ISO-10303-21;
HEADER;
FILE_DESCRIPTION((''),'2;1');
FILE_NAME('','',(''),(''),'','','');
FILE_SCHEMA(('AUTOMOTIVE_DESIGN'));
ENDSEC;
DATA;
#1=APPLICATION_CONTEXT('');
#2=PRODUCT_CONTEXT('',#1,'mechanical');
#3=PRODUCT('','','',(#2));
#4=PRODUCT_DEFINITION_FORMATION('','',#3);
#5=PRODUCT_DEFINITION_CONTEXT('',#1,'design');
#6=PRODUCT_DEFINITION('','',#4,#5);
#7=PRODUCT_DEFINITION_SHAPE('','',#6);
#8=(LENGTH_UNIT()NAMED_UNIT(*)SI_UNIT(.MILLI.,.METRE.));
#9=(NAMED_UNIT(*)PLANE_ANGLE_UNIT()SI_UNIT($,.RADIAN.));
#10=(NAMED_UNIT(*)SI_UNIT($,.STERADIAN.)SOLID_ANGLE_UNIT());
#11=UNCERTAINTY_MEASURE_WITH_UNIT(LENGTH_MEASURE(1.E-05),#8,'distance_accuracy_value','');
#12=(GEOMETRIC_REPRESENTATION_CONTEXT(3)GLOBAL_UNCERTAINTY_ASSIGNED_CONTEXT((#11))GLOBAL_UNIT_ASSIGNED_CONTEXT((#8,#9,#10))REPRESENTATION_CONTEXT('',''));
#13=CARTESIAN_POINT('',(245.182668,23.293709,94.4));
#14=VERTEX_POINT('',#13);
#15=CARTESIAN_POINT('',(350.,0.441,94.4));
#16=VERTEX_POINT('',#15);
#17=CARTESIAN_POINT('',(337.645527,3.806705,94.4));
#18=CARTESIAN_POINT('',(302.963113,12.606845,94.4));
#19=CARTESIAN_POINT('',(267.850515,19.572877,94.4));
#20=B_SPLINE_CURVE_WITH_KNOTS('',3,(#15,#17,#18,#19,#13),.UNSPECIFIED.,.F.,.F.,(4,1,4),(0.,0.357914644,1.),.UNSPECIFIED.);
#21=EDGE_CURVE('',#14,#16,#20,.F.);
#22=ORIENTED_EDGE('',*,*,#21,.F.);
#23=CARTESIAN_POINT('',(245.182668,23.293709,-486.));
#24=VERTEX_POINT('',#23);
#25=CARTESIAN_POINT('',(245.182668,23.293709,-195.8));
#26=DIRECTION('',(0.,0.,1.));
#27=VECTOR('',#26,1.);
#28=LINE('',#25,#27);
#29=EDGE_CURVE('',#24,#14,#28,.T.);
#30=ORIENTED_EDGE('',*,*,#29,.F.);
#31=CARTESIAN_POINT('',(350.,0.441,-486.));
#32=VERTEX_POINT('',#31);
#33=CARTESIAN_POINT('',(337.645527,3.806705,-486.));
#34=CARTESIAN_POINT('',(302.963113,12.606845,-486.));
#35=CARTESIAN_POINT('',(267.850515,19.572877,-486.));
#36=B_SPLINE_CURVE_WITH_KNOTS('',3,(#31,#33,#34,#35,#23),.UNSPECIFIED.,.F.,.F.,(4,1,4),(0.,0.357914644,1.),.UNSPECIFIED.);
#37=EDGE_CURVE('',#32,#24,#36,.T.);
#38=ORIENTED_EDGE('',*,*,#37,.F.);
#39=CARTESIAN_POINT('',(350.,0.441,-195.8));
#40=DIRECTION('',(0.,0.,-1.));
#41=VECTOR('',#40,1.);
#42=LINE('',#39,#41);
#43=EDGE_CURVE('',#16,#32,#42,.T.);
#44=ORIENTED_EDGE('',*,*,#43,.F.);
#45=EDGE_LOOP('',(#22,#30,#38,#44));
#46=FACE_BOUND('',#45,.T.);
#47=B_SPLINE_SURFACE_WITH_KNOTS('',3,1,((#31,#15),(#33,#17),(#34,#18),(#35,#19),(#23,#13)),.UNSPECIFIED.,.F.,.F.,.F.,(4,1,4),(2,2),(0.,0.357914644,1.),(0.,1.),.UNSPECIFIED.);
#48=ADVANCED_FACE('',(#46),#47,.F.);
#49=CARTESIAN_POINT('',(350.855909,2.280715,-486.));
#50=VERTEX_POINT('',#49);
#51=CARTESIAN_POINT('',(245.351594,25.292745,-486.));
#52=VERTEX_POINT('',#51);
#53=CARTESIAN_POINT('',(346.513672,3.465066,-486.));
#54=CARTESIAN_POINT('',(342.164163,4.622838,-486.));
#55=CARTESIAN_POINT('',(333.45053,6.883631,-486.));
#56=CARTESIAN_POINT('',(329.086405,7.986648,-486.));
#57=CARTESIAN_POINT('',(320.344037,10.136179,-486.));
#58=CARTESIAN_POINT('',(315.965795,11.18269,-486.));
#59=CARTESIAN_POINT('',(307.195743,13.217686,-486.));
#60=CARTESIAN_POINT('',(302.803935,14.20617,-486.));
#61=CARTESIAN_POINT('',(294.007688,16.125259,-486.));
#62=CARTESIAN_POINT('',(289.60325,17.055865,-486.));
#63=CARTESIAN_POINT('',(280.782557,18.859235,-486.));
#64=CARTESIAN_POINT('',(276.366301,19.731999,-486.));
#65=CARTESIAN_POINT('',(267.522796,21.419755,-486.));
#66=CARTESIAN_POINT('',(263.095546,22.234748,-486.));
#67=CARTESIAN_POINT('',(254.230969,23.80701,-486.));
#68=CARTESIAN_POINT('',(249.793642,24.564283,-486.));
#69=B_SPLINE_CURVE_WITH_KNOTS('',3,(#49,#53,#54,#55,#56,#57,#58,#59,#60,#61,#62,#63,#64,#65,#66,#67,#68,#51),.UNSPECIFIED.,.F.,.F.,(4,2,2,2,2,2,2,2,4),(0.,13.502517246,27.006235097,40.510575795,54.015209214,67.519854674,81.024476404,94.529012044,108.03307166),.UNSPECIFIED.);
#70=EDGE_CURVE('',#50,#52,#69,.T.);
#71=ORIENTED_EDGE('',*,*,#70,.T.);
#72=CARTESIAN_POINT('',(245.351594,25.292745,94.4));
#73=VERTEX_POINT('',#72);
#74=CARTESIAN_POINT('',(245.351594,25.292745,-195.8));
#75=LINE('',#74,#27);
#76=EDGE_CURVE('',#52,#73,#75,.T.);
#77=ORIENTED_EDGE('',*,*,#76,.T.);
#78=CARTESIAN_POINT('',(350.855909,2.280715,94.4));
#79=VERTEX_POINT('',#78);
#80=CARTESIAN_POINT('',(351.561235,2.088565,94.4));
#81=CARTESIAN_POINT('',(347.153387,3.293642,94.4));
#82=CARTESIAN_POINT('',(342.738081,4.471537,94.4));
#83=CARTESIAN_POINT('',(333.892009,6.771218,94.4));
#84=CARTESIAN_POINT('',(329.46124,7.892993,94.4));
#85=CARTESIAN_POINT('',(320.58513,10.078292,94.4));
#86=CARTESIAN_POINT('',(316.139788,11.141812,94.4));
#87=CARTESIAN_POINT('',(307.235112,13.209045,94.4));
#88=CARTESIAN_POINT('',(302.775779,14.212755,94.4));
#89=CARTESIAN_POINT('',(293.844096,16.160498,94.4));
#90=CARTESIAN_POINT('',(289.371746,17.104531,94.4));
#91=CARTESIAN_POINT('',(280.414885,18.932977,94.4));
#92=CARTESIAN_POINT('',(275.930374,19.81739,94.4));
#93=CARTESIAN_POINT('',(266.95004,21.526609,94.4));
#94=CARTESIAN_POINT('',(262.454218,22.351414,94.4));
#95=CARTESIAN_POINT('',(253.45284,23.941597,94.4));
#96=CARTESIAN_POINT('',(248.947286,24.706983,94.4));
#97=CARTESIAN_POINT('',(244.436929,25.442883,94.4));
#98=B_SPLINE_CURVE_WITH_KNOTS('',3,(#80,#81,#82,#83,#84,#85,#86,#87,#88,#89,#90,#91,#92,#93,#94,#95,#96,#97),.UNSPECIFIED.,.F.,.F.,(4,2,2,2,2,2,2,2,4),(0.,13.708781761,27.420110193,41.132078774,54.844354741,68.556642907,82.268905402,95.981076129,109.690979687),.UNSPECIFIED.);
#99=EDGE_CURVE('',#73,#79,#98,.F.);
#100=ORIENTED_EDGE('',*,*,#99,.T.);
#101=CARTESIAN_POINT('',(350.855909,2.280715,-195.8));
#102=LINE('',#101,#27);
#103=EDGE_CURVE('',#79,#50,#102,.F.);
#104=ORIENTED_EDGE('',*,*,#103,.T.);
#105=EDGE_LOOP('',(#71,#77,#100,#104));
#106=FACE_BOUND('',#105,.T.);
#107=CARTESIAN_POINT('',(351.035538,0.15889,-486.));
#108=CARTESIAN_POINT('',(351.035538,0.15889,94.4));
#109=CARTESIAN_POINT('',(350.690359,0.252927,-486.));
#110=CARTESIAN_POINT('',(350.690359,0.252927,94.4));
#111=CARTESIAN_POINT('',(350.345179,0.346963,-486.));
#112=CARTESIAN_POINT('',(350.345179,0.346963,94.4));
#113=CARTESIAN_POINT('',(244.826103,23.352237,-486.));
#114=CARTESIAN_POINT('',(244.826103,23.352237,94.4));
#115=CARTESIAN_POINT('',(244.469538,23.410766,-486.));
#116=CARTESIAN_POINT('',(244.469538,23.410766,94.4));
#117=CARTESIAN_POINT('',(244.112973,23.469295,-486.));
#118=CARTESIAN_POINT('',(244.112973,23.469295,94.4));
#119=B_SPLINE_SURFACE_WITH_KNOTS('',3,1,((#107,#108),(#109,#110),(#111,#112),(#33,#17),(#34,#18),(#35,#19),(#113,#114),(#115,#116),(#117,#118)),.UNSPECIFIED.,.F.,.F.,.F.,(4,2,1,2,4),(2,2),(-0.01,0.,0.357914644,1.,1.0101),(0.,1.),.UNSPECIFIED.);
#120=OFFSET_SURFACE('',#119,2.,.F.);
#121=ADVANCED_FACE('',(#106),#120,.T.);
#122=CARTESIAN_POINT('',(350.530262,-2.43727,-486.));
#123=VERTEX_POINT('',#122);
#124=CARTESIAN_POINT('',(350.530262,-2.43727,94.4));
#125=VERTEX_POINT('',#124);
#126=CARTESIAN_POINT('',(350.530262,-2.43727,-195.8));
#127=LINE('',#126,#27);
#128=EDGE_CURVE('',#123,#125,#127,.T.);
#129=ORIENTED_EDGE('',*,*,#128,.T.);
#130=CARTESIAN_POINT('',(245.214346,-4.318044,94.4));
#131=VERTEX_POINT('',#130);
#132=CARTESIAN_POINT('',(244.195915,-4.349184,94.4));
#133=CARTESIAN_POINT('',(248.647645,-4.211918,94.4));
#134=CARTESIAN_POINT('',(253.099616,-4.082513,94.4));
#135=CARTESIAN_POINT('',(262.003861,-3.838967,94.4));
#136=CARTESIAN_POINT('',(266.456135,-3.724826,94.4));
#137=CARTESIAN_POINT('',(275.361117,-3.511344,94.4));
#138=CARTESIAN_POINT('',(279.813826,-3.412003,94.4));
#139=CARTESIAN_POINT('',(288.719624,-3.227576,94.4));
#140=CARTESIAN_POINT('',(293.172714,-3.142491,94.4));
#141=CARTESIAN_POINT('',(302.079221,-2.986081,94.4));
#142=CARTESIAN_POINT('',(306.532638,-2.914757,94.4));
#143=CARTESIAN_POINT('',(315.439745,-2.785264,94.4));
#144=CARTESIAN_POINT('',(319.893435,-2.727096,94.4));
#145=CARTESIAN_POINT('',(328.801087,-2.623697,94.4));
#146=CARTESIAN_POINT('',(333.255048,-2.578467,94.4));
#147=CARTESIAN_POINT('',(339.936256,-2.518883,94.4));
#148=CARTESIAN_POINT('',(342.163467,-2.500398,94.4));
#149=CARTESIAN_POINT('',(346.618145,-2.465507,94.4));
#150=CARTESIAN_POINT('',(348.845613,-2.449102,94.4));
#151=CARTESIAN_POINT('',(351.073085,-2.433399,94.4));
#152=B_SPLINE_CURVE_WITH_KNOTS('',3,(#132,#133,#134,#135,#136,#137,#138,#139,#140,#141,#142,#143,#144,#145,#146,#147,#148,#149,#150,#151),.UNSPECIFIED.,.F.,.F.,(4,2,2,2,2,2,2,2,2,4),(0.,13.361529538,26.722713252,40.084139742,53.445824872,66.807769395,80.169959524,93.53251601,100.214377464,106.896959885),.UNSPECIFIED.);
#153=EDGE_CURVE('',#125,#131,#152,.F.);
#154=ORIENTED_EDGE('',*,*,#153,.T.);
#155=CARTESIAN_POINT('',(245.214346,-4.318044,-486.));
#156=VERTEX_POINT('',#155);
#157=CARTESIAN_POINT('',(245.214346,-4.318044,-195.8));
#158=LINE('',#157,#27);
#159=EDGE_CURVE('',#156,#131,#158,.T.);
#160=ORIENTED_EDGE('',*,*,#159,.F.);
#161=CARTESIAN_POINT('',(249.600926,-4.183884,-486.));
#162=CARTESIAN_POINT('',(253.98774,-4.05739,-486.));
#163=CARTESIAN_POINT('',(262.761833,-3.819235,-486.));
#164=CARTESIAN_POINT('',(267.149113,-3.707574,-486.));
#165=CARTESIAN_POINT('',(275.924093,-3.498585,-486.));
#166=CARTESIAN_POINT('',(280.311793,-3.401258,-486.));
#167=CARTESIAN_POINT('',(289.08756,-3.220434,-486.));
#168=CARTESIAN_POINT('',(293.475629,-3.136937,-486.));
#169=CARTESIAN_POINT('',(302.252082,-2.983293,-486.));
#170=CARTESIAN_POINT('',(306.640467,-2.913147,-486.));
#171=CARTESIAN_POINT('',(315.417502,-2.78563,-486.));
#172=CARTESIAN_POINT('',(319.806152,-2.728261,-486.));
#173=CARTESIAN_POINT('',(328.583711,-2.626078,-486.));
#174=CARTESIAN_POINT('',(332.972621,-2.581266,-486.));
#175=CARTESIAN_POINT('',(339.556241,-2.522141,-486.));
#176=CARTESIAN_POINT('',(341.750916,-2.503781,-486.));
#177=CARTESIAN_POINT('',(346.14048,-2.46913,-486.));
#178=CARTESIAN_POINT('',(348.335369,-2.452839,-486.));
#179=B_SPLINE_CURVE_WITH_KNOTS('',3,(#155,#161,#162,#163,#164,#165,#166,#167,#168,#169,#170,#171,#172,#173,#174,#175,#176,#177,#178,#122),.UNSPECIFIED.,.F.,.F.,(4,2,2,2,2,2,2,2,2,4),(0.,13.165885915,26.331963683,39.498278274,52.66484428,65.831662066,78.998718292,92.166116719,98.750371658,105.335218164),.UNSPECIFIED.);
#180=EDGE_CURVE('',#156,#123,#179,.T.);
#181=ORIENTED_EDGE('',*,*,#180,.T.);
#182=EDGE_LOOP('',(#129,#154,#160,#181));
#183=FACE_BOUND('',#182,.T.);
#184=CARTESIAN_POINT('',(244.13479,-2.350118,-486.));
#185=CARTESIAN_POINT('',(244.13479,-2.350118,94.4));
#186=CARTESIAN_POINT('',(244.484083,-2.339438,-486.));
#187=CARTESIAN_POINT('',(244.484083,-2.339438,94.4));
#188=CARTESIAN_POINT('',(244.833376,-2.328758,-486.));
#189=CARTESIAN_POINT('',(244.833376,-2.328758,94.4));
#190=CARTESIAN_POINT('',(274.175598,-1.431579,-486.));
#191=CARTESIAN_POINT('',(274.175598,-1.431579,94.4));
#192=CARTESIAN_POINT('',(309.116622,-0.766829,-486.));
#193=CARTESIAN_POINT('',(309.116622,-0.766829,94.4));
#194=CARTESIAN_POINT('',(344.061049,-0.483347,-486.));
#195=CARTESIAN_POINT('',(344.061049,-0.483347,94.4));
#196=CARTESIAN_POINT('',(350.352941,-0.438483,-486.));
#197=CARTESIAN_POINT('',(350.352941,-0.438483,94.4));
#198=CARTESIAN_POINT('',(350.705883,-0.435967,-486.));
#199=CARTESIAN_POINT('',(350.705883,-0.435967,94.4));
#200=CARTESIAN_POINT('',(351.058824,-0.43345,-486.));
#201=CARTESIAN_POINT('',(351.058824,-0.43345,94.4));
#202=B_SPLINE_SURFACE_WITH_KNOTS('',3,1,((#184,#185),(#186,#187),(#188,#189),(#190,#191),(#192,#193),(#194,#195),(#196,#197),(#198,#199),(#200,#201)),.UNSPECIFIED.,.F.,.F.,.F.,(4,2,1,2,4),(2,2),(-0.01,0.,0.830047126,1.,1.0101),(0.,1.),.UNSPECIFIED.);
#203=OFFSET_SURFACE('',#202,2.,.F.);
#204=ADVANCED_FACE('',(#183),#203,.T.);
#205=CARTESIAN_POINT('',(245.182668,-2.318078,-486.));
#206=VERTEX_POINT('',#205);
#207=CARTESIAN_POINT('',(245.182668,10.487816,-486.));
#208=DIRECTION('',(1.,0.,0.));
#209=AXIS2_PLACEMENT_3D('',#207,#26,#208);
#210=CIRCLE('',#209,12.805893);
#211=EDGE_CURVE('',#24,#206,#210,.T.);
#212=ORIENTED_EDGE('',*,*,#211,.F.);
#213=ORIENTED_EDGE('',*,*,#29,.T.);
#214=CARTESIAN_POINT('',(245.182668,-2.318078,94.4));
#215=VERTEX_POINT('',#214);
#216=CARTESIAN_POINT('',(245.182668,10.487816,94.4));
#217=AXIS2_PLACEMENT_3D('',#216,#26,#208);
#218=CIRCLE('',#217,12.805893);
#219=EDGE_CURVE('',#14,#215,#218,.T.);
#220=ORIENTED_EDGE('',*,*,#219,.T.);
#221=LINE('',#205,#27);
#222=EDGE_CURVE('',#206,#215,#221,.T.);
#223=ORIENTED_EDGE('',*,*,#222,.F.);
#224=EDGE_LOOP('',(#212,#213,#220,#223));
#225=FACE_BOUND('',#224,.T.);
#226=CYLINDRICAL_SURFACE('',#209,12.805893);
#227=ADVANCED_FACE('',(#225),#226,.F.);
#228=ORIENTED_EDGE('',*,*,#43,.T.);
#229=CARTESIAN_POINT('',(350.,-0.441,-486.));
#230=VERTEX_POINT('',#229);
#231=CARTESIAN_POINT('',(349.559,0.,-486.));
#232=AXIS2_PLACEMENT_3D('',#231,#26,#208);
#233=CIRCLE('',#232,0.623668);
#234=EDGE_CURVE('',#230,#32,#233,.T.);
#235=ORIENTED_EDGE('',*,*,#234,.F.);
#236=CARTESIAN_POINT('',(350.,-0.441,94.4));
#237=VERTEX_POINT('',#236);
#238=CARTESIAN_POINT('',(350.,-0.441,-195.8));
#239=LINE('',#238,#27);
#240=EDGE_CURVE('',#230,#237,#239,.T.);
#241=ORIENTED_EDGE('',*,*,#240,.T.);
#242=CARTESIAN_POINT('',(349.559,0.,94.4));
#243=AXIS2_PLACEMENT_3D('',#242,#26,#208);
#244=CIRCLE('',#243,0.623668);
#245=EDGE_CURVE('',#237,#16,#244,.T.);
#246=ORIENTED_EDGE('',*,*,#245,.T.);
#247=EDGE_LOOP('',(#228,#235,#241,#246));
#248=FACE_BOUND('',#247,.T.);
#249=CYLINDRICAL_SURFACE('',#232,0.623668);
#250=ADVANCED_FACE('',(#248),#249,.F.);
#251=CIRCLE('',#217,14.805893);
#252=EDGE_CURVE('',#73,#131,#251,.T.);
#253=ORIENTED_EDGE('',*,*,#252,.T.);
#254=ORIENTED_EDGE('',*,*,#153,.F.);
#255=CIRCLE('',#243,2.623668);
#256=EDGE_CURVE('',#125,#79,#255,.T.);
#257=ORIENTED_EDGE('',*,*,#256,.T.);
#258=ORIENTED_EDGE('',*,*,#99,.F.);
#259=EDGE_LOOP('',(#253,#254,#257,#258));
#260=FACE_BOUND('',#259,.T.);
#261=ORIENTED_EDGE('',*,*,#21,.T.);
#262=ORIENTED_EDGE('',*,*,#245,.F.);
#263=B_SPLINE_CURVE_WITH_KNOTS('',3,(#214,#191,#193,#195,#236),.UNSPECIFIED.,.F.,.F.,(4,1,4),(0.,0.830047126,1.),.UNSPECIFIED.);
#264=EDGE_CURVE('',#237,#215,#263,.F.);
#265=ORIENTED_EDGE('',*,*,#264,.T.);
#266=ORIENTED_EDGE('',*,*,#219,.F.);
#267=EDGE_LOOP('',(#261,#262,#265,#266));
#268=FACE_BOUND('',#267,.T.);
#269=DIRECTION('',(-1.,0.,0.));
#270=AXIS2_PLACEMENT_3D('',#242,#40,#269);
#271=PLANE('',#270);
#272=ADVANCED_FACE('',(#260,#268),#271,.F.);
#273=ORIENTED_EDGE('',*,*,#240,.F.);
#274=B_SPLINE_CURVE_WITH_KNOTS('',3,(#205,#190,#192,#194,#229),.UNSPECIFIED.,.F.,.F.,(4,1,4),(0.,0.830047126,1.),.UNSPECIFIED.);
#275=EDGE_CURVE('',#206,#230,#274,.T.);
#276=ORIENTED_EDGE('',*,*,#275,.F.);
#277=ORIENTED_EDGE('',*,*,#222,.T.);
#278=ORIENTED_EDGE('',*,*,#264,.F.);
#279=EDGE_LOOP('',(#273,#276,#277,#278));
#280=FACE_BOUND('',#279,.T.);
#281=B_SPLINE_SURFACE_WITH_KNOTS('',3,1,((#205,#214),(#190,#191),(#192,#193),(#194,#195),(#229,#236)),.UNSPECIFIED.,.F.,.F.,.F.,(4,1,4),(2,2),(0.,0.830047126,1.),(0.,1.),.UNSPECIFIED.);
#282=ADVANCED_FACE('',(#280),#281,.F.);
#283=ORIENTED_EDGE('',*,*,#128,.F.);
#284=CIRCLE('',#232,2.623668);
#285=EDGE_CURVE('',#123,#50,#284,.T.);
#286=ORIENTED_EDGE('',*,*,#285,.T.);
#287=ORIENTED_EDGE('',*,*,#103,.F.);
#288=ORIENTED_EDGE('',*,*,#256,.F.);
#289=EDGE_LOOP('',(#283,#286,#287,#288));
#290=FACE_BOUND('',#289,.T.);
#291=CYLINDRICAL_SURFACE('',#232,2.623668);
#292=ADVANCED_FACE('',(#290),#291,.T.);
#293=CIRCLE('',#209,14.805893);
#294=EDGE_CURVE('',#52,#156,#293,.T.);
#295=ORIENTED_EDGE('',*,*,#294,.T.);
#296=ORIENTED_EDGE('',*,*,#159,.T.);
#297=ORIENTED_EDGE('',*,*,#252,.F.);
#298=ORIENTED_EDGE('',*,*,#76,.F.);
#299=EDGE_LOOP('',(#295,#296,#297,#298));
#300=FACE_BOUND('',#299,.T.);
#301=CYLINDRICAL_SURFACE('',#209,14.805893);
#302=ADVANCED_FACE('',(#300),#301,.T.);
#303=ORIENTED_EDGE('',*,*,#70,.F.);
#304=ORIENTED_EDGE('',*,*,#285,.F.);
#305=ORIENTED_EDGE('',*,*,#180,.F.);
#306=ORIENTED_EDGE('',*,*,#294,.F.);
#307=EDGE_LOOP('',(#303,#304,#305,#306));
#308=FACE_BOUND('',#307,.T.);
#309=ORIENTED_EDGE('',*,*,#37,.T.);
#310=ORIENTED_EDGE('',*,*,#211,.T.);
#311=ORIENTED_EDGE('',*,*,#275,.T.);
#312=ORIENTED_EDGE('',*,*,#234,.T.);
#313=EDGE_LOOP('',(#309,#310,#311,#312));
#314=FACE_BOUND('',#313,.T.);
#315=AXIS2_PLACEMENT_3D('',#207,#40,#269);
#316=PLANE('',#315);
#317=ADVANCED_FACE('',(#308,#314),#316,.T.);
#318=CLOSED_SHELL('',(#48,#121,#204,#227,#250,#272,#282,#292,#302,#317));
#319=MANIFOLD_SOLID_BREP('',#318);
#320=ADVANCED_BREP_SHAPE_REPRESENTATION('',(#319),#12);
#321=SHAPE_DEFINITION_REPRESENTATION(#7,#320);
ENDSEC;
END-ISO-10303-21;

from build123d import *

# Parameters (mm, degrees)
THICKEN_START   = -486
THICKEN_1_DEPTH = 580.4


# Read off the part's stored shape, not the designer's step: Придать толщину1
with BuildPart() as part:
    # Придать толщину1 outline → Придать толщину1 (new body)
    with BuildSketch(Plane.XY.offset(THICKEN_START)):
        with BuildLine():
            ThreePointArc((350.530262234, -2.437269866), (352.176440725, -0.180662049), (350.855908905, 2.280715243))
            add(Edge.make_bspline(
                [(350.855908905, 2.280715243), (350.847341227, 2.283049319), (350.838773452, 2.285383421), (350.830205678, 2.287717523), (350.821637903, 2.290051626), (350.813070129, 2.292385728), (350.804502354, 2.294719831), (350.79593458, 2.297053933), (350.787366805, 2.299388035), (350.778799031, 2.301722138), (350.770231256, 2.30405624), (350.761663481, 2.306390342), (350.753095707, 2.308724445), (350.744527932, 2.311058547), (350.721223101, 2.317407438), (350.706486045, 2.321422226), (350.691748985, 2.325437014), (350.677011935, 2.329451802), (350.662274867, 2.33346659), (350.647537825, 2.337481378), (350.632800752, 2.341496166), (350.61806371, 2.345510955), (350.603326642, 2.349525743), (350.588589592, 2.353540531), (350.573852532, 2.357555319), (350.559115477, 2.361570107), (350.544378419, 2.365584895), (350.522272834, 2.371607077), (350.514923563, 2.373609253), (350.507299128, 2.375686214), (350.500660824, 2.377494496), (350.491767576, 2.379917309), (350.486631802, 2.381315638), (350.476720209, 2.384016224), (350.471520136, 2.385431796), (350.462702931, 2.387833891), (350.456026243, 2.389652051), (350.448396167, 2.391730226), (350.441070823, 2.39372521), (350.433682178, 2.395737404), (350.418917908, 2.399758121), (350.411535758, 2.401768425), (350.404153591, 2.403778673), (350.396771415, 2.405788865), (350.389389211, 2.407799003), (350.382007011, 2.409809085), (350.374624771, 2.411819112), (350.367242542, 2.413829084), (350.359860275, 2.415839001), (350.352478009, 2.417848863), (350.345095717, 2.419858669), (350.337713416, 2.42186842), (350.330331097, 2.423878115), (350.29341943, 2.433926318), (350.26388985, 2.441963997), (350.234360031, 2.450000791), (350.204829954, 2.458036702), (350.175299658, 2.466071729), (350.145769079, 2.474105871), (350.116238304, 2.48213913), (350.086707235, 2.490171505), (350.057175964, 2.498202995), (350.027644418, 2.506233601), (349.998112646, 2.514263323), (349.968580621, 2.52229216), (349.939048354, 2.530320112), (349.791385798, 2.570455453), (349.673251845, 2.602549572), (349.555113982, 2.634629532), (349.436972217, 2.666695331), (349.318826538, 2.698746961), (349.200676964, 2.73078442), (349.082523474, 2.762807702), (348.964366093, 2.794816803), (348.846204799, 2.826811719), (348.728039611, 2.858792444), (348.609870518, 2.890758973), (348.491697528, 2.922711304), (348.373520638, 2.95464943), (348.018978274, 3.050421181), (347.782601108, 3.114212179), (347.546208352, 3.177946305), (347.309800034, 3.241623522), (347.073376117, 3.305243792), (346.836936683, 3.368807079), (346.600481636, 3.432313345), (346.364011103, 3.495762554), (346.127524974, 3.559154669), (345.891023352, 3.622489653), (345.654506179, 3.685767468), (345.417973499, 3.748988079), (345.181425303, 3.812151447), (344.471734205, 4.001469715), (343.998544788, 4.127452777), (343.525293411, 4.253206428), (343.051980133, 4.378730371), (342.578605007, 4.504024311), (342.105168105, 4.629087953), (341.631669461, 4.753921), (341.158109163, 4.878523157), (340.684487238, 5.002894128), (340.210803771, 5.127033617), (339.737058801, 5.25094133), (339.263252398, 5.37461697), (338.789384613, 5.498060241), (337.367597294, 5.867692062), (336.419493796, 6.113182619), (335.47114547, 6.357740155), (334.522552802, 6.601362303), (333.57371621, 6.844046696), (332.624636238, 7.085790972), (331.67531324, 7.32659276), (330.725747809, 7.566449699), (329.775940285, 7.805359421), (328.825891233, 8.04331956), (327.875601051, 8.28032775), (326.92507024, 8.516381626), (325.974299248, 8.751478823), (324.072277843, 9.219755123), (323.121027933, 9.452934456), (322.169538251, 9.685152167), (321.217809283, 9.916405871), (320.265841965, 10.146693371), (319.313637196, 10.376012495), (318.361195636, 10.60436098), (317.408517503, 10.831736422), (316.455602753, 11.058136282), (315.502451221, 11.283557953), (314.549063115, 11.507998879), (313.595439546, 11.731456744), (312.641583319, 11.953929704), (310.733416382, 12.396903683), (309.779104108, 12.617405599), (308.824564208, 12.836922534), (307.86979786, 13.05545458), (306.914806244, 13.273001831), (305.959590541, 13.489564377), (305.004151926, 13.705142311), (304.048491585, 13.919735726), (303.09261069, 14.133344714), (302.136510427, 14.345969368), (301.18019197, 14.557609779), (300.223656501, 14.76826604), (299.266905199, 14.977938243), (296.396007332, 15.604002957), (294.481216806, 16.017443572), (292.565577101, 16.426949065), (290.649097646, 16.832520172), (288.731787881, 17.234157632), (286.813657228, 17.631862182), (284.894715137, 18.02563456), (282.974971019, 18.415475504), (281.054434331, 18.801385751), (279.133114486, 19.183366038), (277.211020932, 19.561417105), (275.288163092, 19.935539688), (273.364550405, 20.305734525), (270.47801325, 20.855136268), (269.515647844, 21.03728843), (268.553097263, 21.218458932), (267.590362686, 21.398647865), (266.62744529, 21.577855323), (265.664346259, 21.756081397), (264.701066764, 21.933326178), (263.737607993, 22.109589761), (262.773971118, 22.284872235), (261.810157321, 22.459173694), (260.846167781, 22.632494229), (259.882003676, 22.804833933), (258.917666186, 22.976192897), (257.47090164, 23.231760373), (256.98860374, 23.31670437), (256.506262936, 23.401403216), (256.023879374, 23.485856924), (255.541453205, 23.570065504), (255.058984569, 23.654028968), (254.576473624, 23.737747329), (254.093920506, 23.821220596), (253.611325372, 23.904448782), (253.128688363, 23.987431898), (252.64600963, 24.070169956), (252.163289318, 24.152662967), (251.680527575, 24.234910943), (250.956323037, 24.357915371), (250.714911203, 24.398855591), (250.473489068, 24.439734557), (250.232056644, 24.480552269), (249.990613966, 24.521308731), (249.749161023, 24.56200394), (249.507697873, 24.602637903), (249.26622449, 24.643210617), (249.024740936, 24.683722086), (248.783247192, 24.72417231), (248.541743303, 24.764561291), (248.300229273, 24.804889031), (248.058705126, 24.84515553), (247.696403756, 24.905463421), (247.575634108, 24.925550742), (247.454861934, 24.945622753), (247.334087249, 24.965679456), (247.213310029, 24.985720848), (247.092530319, 25.005746933), (246.971748063, 25.025757706), (246.85096333, 25.045753174), (246.730176058, 25.065733331), (246.609386302, 25.085698181), (246.488594028, 25.105647723), (246.367799258, 25.125581957), (246.247001987, 25.145500883), (246.096002277, 25.170380406), (246.065802179, 25.175355354), (246.035601922, 25.180329345), (246.00540152, 25.18530238), (245.975200939, 25.190274456), (245.945000238, 25.19524558), (245.914799335, 25.200215742), (245.884598326, 25.205184952), (245.854397116, 25.210153201), (245.824195784, 25.215120496), (245.793994275, 25.220086833), (245.763792621, 25.225052214), (245.733590808, 25.230016638), (245.695838348, 25.236220973), (245.688287846, 25.23746178), (245.680737334, 25.238702527), (245.673186814, 25.239943215), (245.66563628, 25.241183842), (245.658085744, 25.24242441), (245.650535188, 25.243664918), (245.642984633, 25.244905367), (245.635434059, 25.246145755), (245.627883482, 25.247386084), (245.620332891, 25.248626353), (245.612782293, 25.249866562), (245.605231684, 25.251106711), (245.593905756, 25.252966846), (245.590130444, 25.253586876), (245.586355132, 25.254206891), (245.582579811, 25.25482689), (245.5788045, 25.255446876), (245.575029166, 25.256066845), (245.571253858, 25.256686802), (245.567478516, 25.25730674), (245.5637032, 25.257926667), (245.55992786, 25.258546576), (245.556152532, 25.259166472), (245.552377193, 25.259786352), (245.548601856, 25.260406217), (245.542938844, 25.261335993), (245.541051175, 25.261645915), (245.539163499, 25.261955832), (245.537275836, 25.262265747), (245.535388145, 25.262575656), (245.533500499, 25.262885565), (245.531612792, 25.263195464), (245.529725149, 25.263505366), (245.527837448, 25.263815259), (245.52594979, 25.264125152), (245.524062104, 25.26443504), (245.522174431, 25.264744924), (245.520286752, 25.265054804), (245.516511396, 25.265674558), (245.5146231, 25.265984534), (245.512735772, 25.266294338), (245.510851599, 25.266603635), (245.508960848, 25.266914005), (245.507066649, 25.267224925), (245.505180733, 25.267534481), (245.503304717, 25.267842421), (245.501426209, 25.268150777), (245.499536503, 25.268460964), (245.497646641, 25.268771172), (245.495770176, 25.269079189), (245.493883748, 25.269388837), (245.481970707, 25.271344313), (245.471941721, 25.272990529), (245.461912734, 25.274636744), (245.451883748, 25.27628296), (245.441854762, 25.277929176), (245.431825776, 25.279575392), (245.421796789, 25.281221607), (245.411767803, 25.282867823), (245.401738817, 25.284514039), (245.391709831, 25.286160255), (245.381680844, 25.287806471), (245.371651858, 25.289452686), (245.361622872, 25.291098902), (245.351593885, 25.292745118)],
                knots=[-0.003188793, -0.003188793, -0.003188793, -0.003188793, -0.003188793, -0.003188793, -0.003188793, -0.003188793, -0.003188793, -0.003188793, -0.003188793, -0.003188793, -0.003188793, -0.003188793, -0.003188793, -0.002030469, -0.002030469, -0.002030469, -0.002030469, -0.002030469, -0.002030469, -0.002030469, -0.002030469, -0.002030469, -0.002030469, -0.002030469, -0.002030469, -0.002030469, -3.8086e-05, -3.8086e-05, -3.8086e-05, -3.8086e-05, -3.8086e-05, -3.8086e-05, -3.8086e-05, -3.8086e-05, -3.8086e-05, -3.8086e-05, -3.8086e-05, -3.8086e-05, -3.8086e-05, 0.000958105, 0.000958105, 0.000958105, 0.000958105, 0.000958105, 0.000958105, 0.000958105, 0.000958105, 0.000958105, 0.000958105, 0.000958105, 0.000958105, 0.000958105, 0.001954297, 0.001954297, 0.001954297, 0.001954297, 0.001954297, 0.001954297, 0.001954297, 0.001954297, 0.001954297, 0.001954297, 0.001954297, 0.001954297, 0.001954297, 0.005939062, 0.005939062, 0.005939062, 0.005939062, 0.005939062, 0.005939062, 0.005939062, 0.005939062, 0.005939062, 0.005939062, 0.005939062, 0.005939062, 0.005939062, 0.021878125, 0.021878125, 0.021878125, 0.021878125, 0.021878125, 0.021878125, 0.021878125, 0.021878125, 0.021878125, 0.021878125, 0.021878125, 0.021878125, 0.021878125, 0.05375625, 0.05375625, 0.05375625, 0.05375625, 0.05375625, 0.05375625, 0.05375625, 0.05375625, 0.05375625, 0.05375625, 0.05375625, 0.05375625, 0.05375625, 0.1175125, 0.1175125, 0.1175125, 0.1175125, 0.1175125, 0.1175125, 0.1175125, 0.1175125, 0.1175125, 0.1175125, 0.1175125, 0.1175125, 0.1175125, 0.245025, 0.245025, 0.245025, 0.245025, 0.245025, 0.245025, 0.245025, 0.245025, 0.245025, 0.245025, 0.245025, 0.245025, 0.245025, 0.3725375, 0.3725375, 0.3725375, 0.3725375, 0.3725375, 0.3725375, 0.3725375, 0.3725375, 0.3725375, 0.3725375, 0.3725375, 0.3725375, 0.3725375, 0.50005, 0.50005, 0.50005, 0.50005, 0.50005, 0.50005, 0.50005, 0.50005, 0.50005, 0.50005, 0.50005, 0.50005, 0.50005, 0.755075, 0.755075, 0.755075, 0.755075, 0.755075, 0.755075, 0.755075, 0.755075, 0.755075, 0.755075, 0.755075, 0.755075, 0.755075, 0.8825875, 0.8825875, 0.8825875, 0.8825875, 0.8825875, 0.8825875, 0.8825875, 0.8825875, 0.8825875, 0.8825875, 0.8825875, 0.8825875, 0.8825875, 0.94634375, 0.94634375, 0.94634375, 0.94634375, 0.94634375, 0.94634375, 0.94634375, 0.94634375, 0.94634375, 0.94634375, 0.94634375, 0.94634375, 0.94634375, 0.978221875, 0.978221875, 0.978221875, 0.978221875, 0.978221875, 0.978221875, 0.978221875, 0.978221875, 0.978221875, 0.978221875, 0.978221875, 0.978221875, 0.978221875, 0.994160938, 0.994160938, 0.994160938, 0.994160938, 0.994160938, 0.994160938, 0.994160938, 0.994160938, 0.994160938, 0.994160938, 0.994160938, 0.994160938, 0.994160938, 0.998145703, 0.998145703, 0.998145703, 0.998145703, 0.998145703, 0.998145703, 0.998145703, 0.998145703, 0.998145703, 0.998145703, 0.998145703, 0.998145703, 0.998145703, 0.999141895, 0.999141895, 0.999141895, 0.999141895, 0.999141895, 0.999141895, 0.999141895, 0.999141895, 0.999141895, 0.999141895, 0.999141895, 0.999141895, 0.999141895, 0.99963999, 0.99963999, 0.99963999, 0.99963999, 0.99963999, 0.99963999, 0.99963999, 0.99963999, 0.99963999, 0.99963999, 0.99963999, 0.99963999, 0.99963999, 0.999889038, 0.999889038, 0.999889038, 0.999889038, 0.999889038, 0.999889038, 0.999889038, 0.999889038, 0.999889038, 0.999889038, 0.999889038, 0.999889038, 0.999889038, 1.000138086, 1.000138086, 1.000138086, 1.000138086, 1.000138086, 1.000138086, 1.000138086, 1.000138086, 1.000138086, 1.000138086, 1.000138086, 1.000138086, 1.000138086, 1.001463789, 1.001463789, 1.001463789, 1.001463789, 1.001463789, 1.001463789, 1.001463789, 1.001463789, 1.001463789, 1.001463789, 1.001463789, 1.001463789, 1.001463789, 1.001463789, 1.001463789], degree=14))
            ThreePointArc((245.351593885, 25.292745118), (230.376934034, 10.556441311), (245.214345692, -4.31804368))
            add(Edge.make_bspline(
                [(245.214345692, -4.31804368), (245.216467002, -4.317978818), (245.218588312, -4.317913956), (245.220709621, -4.317849094), (245.222830931, -4.317784232), (245.224952241, -4.31771937), (245.227073551, -4.317654508), (245.22919486, -4.317589646), (245.23131617, -4.317524784), (245.23343748, -4.317459922), (245.23555879, -4.317395061), (245.237680099, -4.317330199), (245.257199522, -4.316733366), (245.274570665, -4.316202241), (245.291975274, -4.315670277), (245.309363737, -4.315138841), (245.326743207, -4.314607743), (245.344133783, -4.314076429), (245.361529897, -4.31354505), (245.378916513, -4.313014017), (245.396299366, -4.312483176), (245.413694183, -4.311952097), (245.43108137, -4.311421312), (245.483248108, -4.30982908), (245.518025946, -4.308767943), (245.552803795, -4.307707156), (245.587581657, -4.306646719), (245.622359529, -4.305586632), (245.657137415, -4.304526895), (245.691915311, -4.303467508), (245.726693221, -4.302408471), (245.761471141, -4.301349784), (245.796249074, -4.300291447), (245.831027019, -4.29923346), (246.004916802, -4.293945274), (246.144028819, -4.289720323), (246.283141027, -4.285500968), (246.422253423, -4.281287205), (246.561366012, -4.277079034), (246.700478787, -4.272876451), (246.839591755, -4.268679455), (246.978704909, -4.264488042), (247.117818254, -4.260302211), (247.256931786, -4.256121959), (247.396045507, -4.251947285), (247.813387235, -4.239439984), (248.091615806, -4.231124083), (248.369845127, -4.222830462), (248.648075198, -4.214559102), (248.926306014, -4.206309986), (249.204537577, -4.198083094), (249.482769881, -4.189878409), (249.761002928, -4.181695911), (250.039236713, -4.173535582), (250.317471236, -4.165397404), (250.595706493, -4.157281357), (251.430414468, -4.132999559), (251.986889384, -4.116900147), (252.543367219, -4.100889041), (253.099847958, -4.084966094), (253.656331584, -4.069131155), (254.212818083, -4.053384078), (254.76930744, -4.037724715), (255.325799638, -4.022152916), (255.882294664, -4.006668535), (256.438792501, -3.991271422), (256.995293135, -3.97596143), (258.664803379, -3.930292371), (259.777821333, -3.900194222), (260.890850288, -3.870442778), (262.003890124, -3.841036853), (263.116940716, -3.811975262), (264.230001946, -3.78325682), (265.343073687, -3.754880342), (266.45615582, -3.726844642), (267.569248221, -3.699148534), (268.682350769, -3.671790835), (269.795463341, -3.644770357), (273.134830764, -3.564717036), (275.361115321, -3.512692304), (277.587438508, -3.462002237), (279.813799348, -3.412637353), (282.04019686, -3.364588167), (284.266630071, -3.317845198), (286.493097998, -3.272398962), (288.719599666, -3.228239975), (290.946134095, -3.185358755), (293.172700308, -3.143745818), (295.399297326, -3.103391681), (299.852551017, -3.025182042), (302.07920769, -2.987326539), (304.305893212, -2.950710869), (306.532606604, -2.915325548), (308.75934689, -2.881161091), (310.986113087, -2.848208015), (313.212904221, -2.816456835), (315.43971931, -2.785898066), (317.666557379, -2.756522226), (319.893417447, -2.728319829), (322.120298536, -2.701281392), (325.460650235, -2.662455449), (326.574113072, -2.649801465), (327.687518826, -2.637438925), (328.801184122, -2.62535295), (329.914200848, -2.613554251), (331.028352183, -2.602088485), (332.141176246, -2.59075747), (333.255026923, -2.579929785), (334.368410156, -2.56920657), (335.481959579, -2.55881785), (336.595498864, -2.548660218), (338.265836672, -2.533788207), (338.822620185, -2.528891016), (339.37940793, -2.524052728), (339.936199892, -2.519272101), (340.492996062, -2.514547893), (341.049796421, -2.509878861), (341.606600965, -2.505263765), (342.163409673, -2.500701361), (342.720222537, -2.496190408), (343.277039543, -2.491729663), (343.833860678, -2.487317884), (344.669098555, -2.480771803), (344.94751221, -2.478601706), (345.225926893, -2.476443386), (345.504342601, -2.474296685), (345.782759334, -2.47216145), (346.061177089, -2.470037525), (346.339595867, -2.467924754), (346.618015663, -2.465822982), (346.896436477, -2.463732055), (347.174858308, -2.461651816), (347.453281153, -2.45958211), (347.870916941, -2.456493119), (348.010129124, -2.45546605), (348.14934156, -2.454441555), (348.288554248, -2.453419617), (348.42776719, -2.452400215), (348.566980384, -2.451383329), (348.70619383, -2.450368941), (348.845407528, -2.449357032), (348.984621478, -2.44834758), (349.12383568, -2.447340568), (349.263050134, -2.446335976), (349.437068515, -2.445083236), (349.471872207, -2.444832838), (349.506675913, -2.44458259), (349.541479638, -2.444332491), (349.576283375, -2.444082541), (349.611087133, -2.443832741), (349.6458909, -2.443583088), (349.680694688, -2.443333584), (349.715498489, -2.443084228), (349.750302307, -2.442835019), (349.78510614, -2.442585958), (349.837311913, -2.442212586), (349.854713914, -2.442088161), (349.872115752, -2.441963779), (349.889517563, -2.441839439), (349.906919525, -2.441715132), (349.924321678, -2.441590854), (349.941723858, -2.441466609), (349.959125786, -2.441342402), (349.976527263, -2.441218243), (349.993928529, -2.441094132), (350.011330728, -2.44097005), (350.046142331, -2.440721829), (350.063548132, -2.440597719), (350.080953934, -2.440473609), (350.098359735, -2.440349499), (350.115765537, -2.440225389), (350.133171337, -2.440101279), (350.15057714, -2.439977169), (350.16798294, -2.439853058), (350.185388742, -2.439728948), (350.202794544, -2.439604838), (350.220200345, -2.439480728), (350.261994154, -2.439182722), (350.286382161, -2.439008826), (350.310770168, -2.43883493), (350.335158176, -2.438661034), (350.359546183, -2.438487138), (350.38393419, -2.438313242), (350.408322198, -2.438139346), (350.432710205, -2.43796545), (350.457098212, -2.437791554), (350.48148622, -2.437617658), (350.505874227, -2.437443762), (350.530262234, -2.437269866)],
                knots=[-0.000281012, -0.000281012, -0.000281012, -0.000281012, -0.000281012, -0.000281012, -0.000281012, -0.000281012, -0.000281012, -0.000281012, -0.000281012, -0.000281012, -0.000281012, -3.8086e-05, -3.8086e-05, -3.8086e-05, -3.8086e-05, -3.8086e-05, -3.8086e-05, -3.8086e-05, -3.8086e-05, -3.8086e-05, -3.8086e-05, -3.8086e-05, 0.001954297, 0.001954297, 0.001954297, 0.001954297, 0.001954297, 0.001954297, 0.001954297, 0.001954297, 0.001954297, 0.001954297, 0.001954297, 0.005939062, 0.005939062, 0.005939062, 0.005939062, 0.005939062, 0.005939062, 0.005939062, 0.005939062, 0.005939062, 0.005939062, 0.005939062, 0.021878125, 0.021878125, 0.021878125, 0.021878125, 0.021878125, 0.021878125, 0.021878125, 0.021878125, 0.021878125, 0.021878125, 0.021878125, 0.05375625, 0.05375625, 0.05375625, 0.05375625, 0.05375625, 0.05375625, 0.05375625, 0.05375625, 0.05375625, 0.05375625, 0.05375625, 0.1175125, 0.1175125, 0.1175125, 0.1175125, 0.1175125, 0.1175125, 0.1175125, 0.1175125, 0.1175125, 0.1175125, 0.1175125, 0.245025, 0.245025, 0.245025, 0.245025, 0.245025, 0.245025, 0.245025, 0.245025, 0.245025, 0.245025, 0.245025, 0.50005, 0.50005, 0.50005, 0.50005, 0.50005, 0.50005, 0.50005, 0.50005, 0.50005, 0.50005, 0.50005, 0.755075, 0.755075, 0.755075, 0.755075, 0.755075, 0.755075, 0.755075, 0.755075, 0.755075, 0.755075, 0.755075, 0.8825875, 0.8825875, 0.8825875, 0.8825875, 0.8825875, 0.8825875, 0.8825875, 0.8825875, 0.8825875, 0.8825875, 0.8825875, 0.94634375, 0.94634375, 0.94634375, 0.94634375, 0.94634375, 0.94634375, 0.94634375, 0.94634375, 0.94634375, 0.94634375, 0.94634375, 0.978221875, 0.978221875, 0.978221875, 0.978221875, 0.978221875, 0.978221875, 0.978221875, 0.978221875, 0.978221875, 0.978221875, 0.978221875, 0.994160938, 0.994160938, 0.994160938, 0.994160938, 0.994160938, 0.994160938, 0.994160938, 0.994160938, 0.994160938, 0.994160938, 0.994160938, 0.998145703, 0.998145703, 0.998145703, 0.998145703, 0.998145703, 0.998145703, 0.998145703, 0.998145703, 0.998145703, 0.998145703, 0.998145703, 1.000138086, 1.000138086, 1.000138086, 1.000138086, 1.000138086, 1.000138086, 1.000138086, 1.000138086, 1.000138086, 1.000138086, 1.000138086, 1.002130469, 1.002130469, 1.002130469, 1.002130469, 1.002130469, 1.002130469, 1.002130469, 1.002130469, 1.002130469, 1.002130469, 1.002130469, 1.004922081, 1.004922081, 1.004922081, 1.004922081, 1.004922081, 1.004922081, 1.004922081, 1.004922081, 1.004922081, 1.004922081, 1.004922081, 1.004922081, 1.004922081], degree=12))
        make_face()
        with BuildLine():
            add(Edge.make_bspline(
                [(350, 0.441), (337.645527153, 3.806705337), (302.963112897, 12.606844702), (267.850515483, 19.572877356), (245.182668182, 23.29370881)],
                knots=[0, 0, 0, 0, 0.357914644, 1, 1, 1, 1], degree=3))
            ThreePointArc((350, 0.441), (350.182668182, 0), (350, -0.441))
            add(Edge.make_bspline(
                [(245.182668182, -2.318077567), (274.175597913, -1.4315791), (309.116621854, -0.766828518), (344.061048987, -0.483347038), (350, -0.441)],
                knots=[0, 0, 0, 0, 0.830047126, 1, 1, 1, 1], degree=3))
            ThreePointArc((245.182668182, -2.318077567), (232.376774993, 10.487815621), (245.182668182, 23.29370881))
        make_face(mode=Mode.SUBTRACT)
    extrude(amount=THICKEN_1_DEPTH)


solid = part.part
